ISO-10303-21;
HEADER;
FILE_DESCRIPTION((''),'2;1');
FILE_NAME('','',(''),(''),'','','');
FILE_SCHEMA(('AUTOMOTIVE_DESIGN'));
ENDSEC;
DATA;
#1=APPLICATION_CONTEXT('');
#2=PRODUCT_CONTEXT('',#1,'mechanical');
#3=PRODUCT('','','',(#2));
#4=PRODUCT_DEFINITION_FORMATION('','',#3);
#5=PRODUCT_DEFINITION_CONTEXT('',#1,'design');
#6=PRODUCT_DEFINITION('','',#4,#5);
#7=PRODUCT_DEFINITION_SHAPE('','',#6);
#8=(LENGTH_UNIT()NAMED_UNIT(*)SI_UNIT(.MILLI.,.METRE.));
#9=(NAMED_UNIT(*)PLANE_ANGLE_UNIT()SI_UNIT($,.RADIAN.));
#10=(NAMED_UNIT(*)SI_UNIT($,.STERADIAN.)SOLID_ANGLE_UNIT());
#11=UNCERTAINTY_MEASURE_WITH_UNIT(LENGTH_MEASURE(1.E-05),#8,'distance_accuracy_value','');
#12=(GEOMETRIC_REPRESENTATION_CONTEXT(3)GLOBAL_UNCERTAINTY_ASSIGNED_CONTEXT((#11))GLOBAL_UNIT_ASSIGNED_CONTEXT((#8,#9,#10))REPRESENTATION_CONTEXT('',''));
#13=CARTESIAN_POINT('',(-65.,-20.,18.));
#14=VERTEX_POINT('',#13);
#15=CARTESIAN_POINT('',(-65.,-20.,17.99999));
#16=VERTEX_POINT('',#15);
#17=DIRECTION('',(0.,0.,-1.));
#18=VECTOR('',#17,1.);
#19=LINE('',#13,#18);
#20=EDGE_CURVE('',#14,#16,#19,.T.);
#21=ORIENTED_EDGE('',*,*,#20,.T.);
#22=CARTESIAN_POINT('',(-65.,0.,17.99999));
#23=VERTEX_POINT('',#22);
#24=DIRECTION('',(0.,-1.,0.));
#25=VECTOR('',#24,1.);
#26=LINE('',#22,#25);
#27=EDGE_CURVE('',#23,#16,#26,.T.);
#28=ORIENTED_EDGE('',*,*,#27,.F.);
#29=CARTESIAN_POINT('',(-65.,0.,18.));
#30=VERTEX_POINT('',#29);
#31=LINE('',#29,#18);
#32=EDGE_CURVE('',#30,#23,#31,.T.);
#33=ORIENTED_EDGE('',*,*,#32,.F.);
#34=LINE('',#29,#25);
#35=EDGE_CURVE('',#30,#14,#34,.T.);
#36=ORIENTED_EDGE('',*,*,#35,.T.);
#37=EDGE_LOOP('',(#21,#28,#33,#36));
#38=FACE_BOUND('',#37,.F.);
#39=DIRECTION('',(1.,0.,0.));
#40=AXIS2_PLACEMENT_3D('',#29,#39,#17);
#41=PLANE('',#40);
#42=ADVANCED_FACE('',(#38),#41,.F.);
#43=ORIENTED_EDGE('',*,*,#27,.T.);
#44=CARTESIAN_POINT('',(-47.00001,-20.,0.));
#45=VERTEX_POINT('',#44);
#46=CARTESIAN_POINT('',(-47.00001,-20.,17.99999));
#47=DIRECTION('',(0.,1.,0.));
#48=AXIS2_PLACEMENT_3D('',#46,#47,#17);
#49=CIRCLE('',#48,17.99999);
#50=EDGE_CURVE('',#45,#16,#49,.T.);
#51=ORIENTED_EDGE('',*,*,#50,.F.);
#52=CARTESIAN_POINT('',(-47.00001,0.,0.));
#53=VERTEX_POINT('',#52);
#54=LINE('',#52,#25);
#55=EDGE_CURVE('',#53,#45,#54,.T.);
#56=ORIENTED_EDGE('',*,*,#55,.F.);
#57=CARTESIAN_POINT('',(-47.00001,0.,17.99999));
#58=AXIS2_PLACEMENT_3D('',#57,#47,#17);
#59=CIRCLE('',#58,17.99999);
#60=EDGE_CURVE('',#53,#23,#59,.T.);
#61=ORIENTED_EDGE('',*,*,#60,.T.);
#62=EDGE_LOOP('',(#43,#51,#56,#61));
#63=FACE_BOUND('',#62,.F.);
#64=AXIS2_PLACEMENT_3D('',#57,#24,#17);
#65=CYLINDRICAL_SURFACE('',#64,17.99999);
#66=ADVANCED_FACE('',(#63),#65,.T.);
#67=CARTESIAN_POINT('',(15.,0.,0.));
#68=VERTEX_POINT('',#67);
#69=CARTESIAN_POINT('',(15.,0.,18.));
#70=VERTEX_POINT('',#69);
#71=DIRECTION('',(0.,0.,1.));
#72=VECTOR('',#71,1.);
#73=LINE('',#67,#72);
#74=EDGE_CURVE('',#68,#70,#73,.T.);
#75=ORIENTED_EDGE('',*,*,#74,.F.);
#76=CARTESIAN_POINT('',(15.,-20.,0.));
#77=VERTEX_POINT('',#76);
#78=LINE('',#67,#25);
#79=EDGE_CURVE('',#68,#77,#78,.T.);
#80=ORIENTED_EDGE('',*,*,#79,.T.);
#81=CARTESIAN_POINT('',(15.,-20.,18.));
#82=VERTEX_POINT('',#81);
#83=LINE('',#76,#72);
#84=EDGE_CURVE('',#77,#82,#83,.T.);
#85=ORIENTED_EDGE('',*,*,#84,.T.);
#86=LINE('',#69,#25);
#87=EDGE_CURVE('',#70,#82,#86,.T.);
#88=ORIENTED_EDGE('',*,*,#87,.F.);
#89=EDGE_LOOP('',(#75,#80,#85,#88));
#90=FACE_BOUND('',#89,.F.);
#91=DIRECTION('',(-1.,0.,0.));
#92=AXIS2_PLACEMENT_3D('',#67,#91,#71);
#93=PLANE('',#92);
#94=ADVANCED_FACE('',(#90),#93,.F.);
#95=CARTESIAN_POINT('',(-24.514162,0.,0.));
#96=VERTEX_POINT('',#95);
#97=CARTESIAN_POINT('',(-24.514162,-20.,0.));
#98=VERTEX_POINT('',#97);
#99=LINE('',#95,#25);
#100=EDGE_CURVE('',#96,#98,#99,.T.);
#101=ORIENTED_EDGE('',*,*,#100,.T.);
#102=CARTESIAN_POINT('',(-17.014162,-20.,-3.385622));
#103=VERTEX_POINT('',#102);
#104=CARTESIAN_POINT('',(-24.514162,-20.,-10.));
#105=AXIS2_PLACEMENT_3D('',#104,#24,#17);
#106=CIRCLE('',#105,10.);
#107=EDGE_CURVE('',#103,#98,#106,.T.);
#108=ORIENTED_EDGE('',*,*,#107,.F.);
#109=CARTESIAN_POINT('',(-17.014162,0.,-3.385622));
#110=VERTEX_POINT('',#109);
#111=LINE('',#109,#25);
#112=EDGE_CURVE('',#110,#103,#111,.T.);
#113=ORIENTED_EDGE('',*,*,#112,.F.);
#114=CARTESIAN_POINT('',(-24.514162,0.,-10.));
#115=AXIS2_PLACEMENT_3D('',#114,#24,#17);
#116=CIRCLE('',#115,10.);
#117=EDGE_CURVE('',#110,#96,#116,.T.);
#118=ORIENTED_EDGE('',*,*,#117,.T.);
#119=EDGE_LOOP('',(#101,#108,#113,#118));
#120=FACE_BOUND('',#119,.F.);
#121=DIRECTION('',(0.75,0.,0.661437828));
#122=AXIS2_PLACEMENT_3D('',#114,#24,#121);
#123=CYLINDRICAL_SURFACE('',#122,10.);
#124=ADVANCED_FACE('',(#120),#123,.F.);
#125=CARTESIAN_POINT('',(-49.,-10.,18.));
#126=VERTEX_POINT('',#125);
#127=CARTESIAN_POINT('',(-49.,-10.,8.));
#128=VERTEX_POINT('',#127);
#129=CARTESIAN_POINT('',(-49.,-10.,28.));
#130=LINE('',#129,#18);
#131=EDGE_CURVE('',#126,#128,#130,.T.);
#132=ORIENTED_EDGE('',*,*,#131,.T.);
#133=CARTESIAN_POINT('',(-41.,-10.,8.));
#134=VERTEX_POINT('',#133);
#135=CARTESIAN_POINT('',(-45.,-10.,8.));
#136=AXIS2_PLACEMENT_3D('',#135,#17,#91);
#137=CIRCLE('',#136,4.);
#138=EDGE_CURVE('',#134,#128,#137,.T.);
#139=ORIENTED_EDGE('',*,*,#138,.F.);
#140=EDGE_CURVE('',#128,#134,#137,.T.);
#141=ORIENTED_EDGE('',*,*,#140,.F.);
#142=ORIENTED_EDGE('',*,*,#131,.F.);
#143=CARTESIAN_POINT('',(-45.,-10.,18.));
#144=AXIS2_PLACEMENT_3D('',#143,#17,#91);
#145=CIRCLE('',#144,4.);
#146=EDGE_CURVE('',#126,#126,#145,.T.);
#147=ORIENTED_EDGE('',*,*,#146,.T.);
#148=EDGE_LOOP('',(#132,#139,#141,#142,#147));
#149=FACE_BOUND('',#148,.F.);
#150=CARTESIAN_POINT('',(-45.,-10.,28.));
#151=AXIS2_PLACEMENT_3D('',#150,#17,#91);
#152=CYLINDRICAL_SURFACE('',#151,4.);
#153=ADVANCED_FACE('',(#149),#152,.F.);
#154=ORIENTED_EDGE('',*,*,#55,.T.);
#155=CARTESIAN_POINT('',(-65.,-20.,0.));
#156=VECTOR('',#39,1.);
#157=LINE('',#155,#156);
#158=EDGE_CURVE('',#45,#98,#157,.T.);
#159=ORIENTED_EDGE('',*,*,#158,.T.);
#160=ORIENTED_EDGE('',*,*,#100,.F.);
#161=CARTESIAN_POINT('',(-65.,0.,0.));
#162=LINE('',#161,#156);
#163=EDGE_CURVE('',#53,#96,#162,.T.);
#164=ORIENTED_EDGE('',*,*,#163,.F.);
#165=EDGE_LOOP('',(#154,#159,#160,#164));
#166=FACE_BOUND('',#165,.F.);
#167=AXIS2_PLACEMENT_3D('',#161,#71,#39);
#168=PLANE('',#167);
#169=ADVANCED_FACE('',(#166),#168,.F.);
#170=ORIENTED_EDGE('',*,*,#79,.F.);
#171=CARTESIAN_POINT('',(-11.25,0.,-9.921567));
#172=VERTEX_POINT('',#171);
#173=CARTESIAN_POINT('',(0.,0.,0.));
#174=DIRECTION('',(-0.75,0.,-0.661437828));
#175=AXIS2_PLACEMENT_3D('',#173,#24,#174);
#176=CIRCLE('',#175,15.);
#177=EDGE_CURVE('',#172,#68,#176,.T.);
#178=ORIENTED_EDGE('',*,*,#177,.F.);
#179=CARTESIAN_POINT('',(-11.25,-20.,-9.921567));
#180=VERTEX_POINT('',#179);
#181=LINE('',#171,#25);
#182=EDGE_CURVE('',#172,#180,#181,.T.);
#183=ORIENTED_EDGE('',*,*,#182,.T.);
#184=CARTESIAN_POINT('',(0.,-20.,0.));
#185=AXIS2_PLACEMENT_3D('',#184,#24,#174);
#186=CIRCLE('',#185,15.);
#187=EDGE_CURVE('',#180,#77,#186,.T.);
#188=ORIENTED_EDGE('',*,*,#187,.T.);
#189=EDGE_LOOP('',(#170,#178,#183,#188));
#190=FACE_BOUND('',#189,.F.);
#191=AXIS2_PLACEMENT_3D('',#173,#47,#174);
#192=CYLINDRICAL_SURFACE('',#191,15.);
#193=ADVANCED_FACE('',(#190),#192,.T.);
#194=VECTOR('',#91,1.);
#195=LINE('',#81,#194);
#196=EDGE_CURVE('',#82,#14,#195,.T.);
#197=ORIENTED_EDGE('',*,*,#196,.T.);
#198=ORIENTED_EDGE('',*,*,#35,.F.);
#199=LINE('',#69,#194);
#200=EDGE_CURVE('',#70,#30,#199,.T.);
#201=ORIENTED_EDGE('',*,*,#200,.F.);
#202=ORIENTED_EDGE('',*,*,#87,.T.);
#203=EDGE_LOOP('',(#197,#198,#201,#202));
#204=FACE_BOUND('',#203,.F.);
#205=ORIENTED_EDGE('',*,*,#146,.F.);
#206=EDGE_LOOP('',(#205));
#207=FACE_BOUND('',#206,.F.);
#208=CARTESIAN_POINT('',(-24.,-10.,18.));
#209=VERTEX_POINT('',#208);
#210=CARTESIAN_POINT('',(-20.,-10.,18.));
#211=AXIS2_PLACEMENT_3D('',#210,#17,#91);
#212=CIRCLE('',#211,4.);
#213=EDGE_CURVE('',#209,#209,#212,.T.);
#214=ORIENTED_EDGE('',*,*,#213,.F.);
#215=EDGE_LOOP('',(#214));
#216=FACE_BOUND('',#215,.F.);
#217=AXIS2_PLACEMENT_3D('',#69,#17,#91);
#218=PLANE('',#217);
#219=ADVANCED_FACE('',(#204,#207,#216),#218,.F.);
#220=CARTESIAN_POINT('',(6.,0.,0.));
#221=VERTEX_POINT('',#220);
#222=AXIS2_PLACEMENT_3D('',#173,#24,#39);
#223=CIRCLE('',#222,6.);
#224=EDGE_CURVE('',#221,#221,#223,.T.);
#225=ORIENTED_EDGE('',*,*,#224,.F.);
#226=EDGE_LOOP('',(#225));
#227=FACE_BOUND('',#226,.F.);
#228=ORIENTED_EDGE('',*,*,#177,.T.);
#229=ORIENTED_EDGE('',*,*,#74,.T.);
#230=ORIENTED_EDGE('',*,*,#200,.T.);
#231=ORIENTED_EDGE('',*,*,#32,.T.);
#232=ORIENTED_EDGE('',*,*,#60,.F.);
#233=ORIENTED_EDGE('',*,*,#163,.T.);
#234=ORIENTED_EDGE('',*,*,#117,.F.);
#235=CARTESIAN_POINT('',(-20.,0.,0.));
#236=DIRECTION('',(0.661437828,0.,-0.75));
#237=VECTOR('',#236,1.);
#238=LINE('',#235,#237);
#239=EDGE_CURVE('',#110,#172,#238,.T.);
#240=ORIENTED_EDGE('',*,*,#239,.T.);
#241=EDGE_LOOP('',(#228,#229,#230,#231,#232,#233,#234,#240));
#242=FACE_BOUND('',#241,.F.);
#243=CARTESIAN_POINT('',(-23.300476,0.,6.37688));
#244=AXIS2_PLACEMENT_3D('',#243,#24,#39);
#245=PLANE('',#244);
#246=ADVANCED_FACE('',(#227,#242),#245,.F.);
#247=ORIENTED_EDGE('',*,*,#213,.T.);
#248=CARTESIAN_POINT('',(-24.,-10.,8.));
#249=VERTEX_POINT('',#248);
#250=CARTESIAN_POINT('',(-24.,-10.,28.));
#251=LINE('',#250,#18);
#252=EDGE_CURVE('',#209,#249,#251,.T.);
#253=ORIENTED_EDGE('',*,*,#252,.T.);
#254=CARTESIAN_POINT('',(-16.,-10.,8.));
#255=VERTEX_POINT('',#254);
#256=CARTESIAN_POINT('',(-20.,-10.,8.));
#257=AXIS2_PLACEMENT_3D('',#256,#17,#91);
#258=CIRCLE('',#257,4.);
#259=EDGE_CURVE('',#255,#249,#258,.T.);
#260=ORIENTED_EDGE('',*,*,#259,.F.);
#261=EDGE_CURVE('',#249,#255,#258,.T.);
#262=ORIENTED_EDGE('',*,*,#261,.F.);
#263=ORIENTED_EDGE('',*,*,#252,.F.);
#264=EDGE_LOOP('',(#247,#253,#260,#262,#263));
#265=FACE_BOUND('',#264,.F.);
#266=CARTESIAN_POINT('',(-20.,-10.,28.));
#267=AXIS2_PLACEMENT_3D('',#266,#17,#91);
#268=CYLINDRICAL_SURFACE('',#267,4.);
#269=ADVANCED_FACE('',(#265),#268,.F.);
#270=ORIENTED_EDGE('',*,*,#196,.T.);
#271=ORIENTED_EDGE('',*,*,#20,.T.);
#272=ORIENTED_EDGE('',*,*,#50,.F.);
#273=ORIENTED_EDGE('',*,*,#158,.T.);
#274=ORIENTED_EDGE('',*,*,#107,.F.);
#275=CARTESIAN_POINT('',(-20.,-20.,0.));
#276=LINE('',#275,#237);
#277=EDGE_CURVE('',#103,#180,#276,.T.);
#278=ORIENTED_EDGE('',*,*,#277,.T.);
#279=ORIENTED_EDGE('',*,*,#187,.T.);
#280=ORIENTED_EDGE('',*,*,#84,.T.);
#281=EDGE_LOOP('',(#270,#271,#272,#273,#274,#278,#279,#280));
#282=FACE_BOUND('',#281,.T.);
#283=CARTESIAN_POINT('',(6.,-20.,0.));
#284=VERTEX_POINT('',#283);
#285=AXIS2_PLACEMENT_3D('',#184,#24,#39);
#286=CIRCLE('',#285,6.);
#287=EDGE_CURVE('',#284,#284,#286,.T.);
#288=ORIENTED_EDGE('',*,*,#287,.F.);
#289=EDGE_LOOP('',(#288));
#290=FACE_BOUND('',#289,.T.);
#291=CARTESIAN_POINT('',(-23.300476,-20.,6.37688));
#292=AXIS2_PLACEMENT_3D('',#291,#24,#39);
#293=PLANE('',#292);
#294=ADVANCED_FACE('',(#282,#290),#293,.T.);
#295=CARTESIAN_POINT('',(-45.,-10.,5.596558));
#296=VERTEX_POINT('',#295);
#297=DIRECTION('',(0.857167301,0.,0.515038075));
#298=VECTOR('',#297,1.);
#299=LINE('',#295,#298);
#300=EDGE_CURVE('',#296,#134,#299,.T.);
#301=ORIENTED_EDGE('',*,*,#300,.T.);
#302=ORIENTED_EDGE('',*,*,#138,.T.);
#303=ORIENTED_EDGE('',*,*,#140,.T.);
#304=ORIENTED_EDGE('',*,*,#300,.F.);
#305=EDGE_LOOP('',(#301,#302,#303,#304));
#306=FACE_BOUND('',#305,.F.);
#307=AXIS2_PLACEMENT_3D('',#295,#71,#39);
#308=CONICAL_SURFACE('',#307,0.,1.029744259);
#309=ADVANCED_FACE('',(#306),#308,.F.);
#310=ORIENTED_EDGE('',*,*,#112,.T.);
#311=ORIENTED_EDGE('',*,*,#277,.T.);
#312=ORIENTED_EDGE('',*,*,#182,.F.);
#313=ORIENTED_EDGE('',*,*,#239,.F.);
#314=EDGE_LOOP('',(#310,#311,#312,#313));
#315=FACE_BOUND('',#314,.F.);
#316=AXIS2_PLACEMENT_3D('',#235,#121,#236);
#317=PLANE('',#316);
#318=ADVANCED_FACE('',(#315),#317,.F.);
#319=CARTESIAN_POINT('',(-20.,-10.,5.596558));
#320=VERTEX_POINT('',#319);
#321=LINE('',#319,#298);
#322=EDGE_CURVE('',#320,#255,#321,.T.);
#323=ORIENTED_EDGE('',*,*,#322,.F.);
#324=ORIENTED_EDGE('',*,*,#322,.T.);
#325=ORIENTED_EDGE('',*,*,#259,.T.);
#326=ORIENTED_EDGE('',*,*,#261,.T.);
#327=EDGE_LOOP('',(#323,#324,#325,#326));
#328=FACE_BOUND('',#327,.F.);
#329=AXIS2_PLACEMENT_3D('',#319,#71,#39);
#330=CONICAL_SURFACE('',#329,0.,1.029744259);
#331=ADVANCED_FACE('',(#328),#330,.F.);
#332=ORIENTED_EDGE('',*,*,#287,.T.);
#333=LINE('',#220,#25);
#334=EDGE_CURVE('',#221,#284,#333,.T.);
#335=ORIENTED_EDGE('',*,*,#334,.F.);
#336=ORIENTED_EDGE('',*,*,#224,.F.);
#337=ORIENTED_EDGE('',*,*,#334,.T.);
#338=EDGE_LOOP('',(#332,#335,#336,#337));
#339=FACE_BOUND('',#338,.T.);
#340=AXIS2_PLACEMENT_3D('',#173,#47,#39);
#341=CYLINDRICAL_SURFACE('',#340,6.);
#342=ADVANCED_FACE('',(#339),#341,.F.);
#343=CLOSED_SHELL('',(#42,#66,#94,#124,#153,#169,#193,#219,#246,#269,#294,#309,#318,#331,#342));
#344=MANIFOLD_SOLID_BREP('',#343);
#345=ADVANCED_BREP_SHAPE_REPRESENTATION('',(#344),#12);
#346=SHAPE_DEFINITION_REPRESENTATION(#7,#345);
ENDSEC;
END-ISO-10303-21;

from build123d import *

# Parameters (mm, degrees)
F0_R     = 6
F1_DEPTH = 20
F2_R     = 10
F4_D     = 8
F4_DEPTH = 10
F4_TIP   = 2.4034424761
F5_R     = 17.99999


# Not quite as in the source:
# - a fillet or chamfer is up to 0.001 mm smaller than in the source, because OpenCascade refuses the exact size


with BuildPart() as f1:
    # F0 (on Front) → F1 (new body)
    with BuildSketch(Plane.XZ):
        with BuildLine():
            Line((-20, 0), (-11.25, -9.9215674165))
            ThreePointArc((-11.25, -9.9215674165), (5.3033008589, -14.0312152004), (15, 0))
            Line((15, 0), (15, 15))
            Line((15, 15), (15, 18))
            Line((15, 18), (-65, 18))
            Line((-65, 18), (-65, 0))
            Line((-65, 0), (-20, 0))
        make_face()
        Circle(F0_R, mode=Mode.SUBTRACT)
    extrude(amount=F1_DEPTH)

    # F2
    f2_edges = [f1.edges().sort_by_distance(p)[0] for p in [
        (-20, -10, 0),
    ]]
    fillet(f2_edges, radius=F2_R)

    # F4
    with Locations(Plane.XY.offset(18)):
        with Locations((-45, -10), (-20, -10)):
            Hole(F4_D / 2, depth=F4_DEPTH)
            with Locations((0, 0, -(F4_DEPTH + F4_TIP / 2))):  # 118° drill point
                Cone(0, F4_D / 2, F4_TIP, mode=Mode.SUBTRACT)

    # F5 (radius 18 in the source; OpenCascade refuses exactly that, so slightly less here)
    f5_edges = [f1.edges().sort_by_distance(p)[0] for p in [
        (-65, -10, 0),
    ]]
    fillet(f5_edges, radius=F5_R)


solid = f1.part
